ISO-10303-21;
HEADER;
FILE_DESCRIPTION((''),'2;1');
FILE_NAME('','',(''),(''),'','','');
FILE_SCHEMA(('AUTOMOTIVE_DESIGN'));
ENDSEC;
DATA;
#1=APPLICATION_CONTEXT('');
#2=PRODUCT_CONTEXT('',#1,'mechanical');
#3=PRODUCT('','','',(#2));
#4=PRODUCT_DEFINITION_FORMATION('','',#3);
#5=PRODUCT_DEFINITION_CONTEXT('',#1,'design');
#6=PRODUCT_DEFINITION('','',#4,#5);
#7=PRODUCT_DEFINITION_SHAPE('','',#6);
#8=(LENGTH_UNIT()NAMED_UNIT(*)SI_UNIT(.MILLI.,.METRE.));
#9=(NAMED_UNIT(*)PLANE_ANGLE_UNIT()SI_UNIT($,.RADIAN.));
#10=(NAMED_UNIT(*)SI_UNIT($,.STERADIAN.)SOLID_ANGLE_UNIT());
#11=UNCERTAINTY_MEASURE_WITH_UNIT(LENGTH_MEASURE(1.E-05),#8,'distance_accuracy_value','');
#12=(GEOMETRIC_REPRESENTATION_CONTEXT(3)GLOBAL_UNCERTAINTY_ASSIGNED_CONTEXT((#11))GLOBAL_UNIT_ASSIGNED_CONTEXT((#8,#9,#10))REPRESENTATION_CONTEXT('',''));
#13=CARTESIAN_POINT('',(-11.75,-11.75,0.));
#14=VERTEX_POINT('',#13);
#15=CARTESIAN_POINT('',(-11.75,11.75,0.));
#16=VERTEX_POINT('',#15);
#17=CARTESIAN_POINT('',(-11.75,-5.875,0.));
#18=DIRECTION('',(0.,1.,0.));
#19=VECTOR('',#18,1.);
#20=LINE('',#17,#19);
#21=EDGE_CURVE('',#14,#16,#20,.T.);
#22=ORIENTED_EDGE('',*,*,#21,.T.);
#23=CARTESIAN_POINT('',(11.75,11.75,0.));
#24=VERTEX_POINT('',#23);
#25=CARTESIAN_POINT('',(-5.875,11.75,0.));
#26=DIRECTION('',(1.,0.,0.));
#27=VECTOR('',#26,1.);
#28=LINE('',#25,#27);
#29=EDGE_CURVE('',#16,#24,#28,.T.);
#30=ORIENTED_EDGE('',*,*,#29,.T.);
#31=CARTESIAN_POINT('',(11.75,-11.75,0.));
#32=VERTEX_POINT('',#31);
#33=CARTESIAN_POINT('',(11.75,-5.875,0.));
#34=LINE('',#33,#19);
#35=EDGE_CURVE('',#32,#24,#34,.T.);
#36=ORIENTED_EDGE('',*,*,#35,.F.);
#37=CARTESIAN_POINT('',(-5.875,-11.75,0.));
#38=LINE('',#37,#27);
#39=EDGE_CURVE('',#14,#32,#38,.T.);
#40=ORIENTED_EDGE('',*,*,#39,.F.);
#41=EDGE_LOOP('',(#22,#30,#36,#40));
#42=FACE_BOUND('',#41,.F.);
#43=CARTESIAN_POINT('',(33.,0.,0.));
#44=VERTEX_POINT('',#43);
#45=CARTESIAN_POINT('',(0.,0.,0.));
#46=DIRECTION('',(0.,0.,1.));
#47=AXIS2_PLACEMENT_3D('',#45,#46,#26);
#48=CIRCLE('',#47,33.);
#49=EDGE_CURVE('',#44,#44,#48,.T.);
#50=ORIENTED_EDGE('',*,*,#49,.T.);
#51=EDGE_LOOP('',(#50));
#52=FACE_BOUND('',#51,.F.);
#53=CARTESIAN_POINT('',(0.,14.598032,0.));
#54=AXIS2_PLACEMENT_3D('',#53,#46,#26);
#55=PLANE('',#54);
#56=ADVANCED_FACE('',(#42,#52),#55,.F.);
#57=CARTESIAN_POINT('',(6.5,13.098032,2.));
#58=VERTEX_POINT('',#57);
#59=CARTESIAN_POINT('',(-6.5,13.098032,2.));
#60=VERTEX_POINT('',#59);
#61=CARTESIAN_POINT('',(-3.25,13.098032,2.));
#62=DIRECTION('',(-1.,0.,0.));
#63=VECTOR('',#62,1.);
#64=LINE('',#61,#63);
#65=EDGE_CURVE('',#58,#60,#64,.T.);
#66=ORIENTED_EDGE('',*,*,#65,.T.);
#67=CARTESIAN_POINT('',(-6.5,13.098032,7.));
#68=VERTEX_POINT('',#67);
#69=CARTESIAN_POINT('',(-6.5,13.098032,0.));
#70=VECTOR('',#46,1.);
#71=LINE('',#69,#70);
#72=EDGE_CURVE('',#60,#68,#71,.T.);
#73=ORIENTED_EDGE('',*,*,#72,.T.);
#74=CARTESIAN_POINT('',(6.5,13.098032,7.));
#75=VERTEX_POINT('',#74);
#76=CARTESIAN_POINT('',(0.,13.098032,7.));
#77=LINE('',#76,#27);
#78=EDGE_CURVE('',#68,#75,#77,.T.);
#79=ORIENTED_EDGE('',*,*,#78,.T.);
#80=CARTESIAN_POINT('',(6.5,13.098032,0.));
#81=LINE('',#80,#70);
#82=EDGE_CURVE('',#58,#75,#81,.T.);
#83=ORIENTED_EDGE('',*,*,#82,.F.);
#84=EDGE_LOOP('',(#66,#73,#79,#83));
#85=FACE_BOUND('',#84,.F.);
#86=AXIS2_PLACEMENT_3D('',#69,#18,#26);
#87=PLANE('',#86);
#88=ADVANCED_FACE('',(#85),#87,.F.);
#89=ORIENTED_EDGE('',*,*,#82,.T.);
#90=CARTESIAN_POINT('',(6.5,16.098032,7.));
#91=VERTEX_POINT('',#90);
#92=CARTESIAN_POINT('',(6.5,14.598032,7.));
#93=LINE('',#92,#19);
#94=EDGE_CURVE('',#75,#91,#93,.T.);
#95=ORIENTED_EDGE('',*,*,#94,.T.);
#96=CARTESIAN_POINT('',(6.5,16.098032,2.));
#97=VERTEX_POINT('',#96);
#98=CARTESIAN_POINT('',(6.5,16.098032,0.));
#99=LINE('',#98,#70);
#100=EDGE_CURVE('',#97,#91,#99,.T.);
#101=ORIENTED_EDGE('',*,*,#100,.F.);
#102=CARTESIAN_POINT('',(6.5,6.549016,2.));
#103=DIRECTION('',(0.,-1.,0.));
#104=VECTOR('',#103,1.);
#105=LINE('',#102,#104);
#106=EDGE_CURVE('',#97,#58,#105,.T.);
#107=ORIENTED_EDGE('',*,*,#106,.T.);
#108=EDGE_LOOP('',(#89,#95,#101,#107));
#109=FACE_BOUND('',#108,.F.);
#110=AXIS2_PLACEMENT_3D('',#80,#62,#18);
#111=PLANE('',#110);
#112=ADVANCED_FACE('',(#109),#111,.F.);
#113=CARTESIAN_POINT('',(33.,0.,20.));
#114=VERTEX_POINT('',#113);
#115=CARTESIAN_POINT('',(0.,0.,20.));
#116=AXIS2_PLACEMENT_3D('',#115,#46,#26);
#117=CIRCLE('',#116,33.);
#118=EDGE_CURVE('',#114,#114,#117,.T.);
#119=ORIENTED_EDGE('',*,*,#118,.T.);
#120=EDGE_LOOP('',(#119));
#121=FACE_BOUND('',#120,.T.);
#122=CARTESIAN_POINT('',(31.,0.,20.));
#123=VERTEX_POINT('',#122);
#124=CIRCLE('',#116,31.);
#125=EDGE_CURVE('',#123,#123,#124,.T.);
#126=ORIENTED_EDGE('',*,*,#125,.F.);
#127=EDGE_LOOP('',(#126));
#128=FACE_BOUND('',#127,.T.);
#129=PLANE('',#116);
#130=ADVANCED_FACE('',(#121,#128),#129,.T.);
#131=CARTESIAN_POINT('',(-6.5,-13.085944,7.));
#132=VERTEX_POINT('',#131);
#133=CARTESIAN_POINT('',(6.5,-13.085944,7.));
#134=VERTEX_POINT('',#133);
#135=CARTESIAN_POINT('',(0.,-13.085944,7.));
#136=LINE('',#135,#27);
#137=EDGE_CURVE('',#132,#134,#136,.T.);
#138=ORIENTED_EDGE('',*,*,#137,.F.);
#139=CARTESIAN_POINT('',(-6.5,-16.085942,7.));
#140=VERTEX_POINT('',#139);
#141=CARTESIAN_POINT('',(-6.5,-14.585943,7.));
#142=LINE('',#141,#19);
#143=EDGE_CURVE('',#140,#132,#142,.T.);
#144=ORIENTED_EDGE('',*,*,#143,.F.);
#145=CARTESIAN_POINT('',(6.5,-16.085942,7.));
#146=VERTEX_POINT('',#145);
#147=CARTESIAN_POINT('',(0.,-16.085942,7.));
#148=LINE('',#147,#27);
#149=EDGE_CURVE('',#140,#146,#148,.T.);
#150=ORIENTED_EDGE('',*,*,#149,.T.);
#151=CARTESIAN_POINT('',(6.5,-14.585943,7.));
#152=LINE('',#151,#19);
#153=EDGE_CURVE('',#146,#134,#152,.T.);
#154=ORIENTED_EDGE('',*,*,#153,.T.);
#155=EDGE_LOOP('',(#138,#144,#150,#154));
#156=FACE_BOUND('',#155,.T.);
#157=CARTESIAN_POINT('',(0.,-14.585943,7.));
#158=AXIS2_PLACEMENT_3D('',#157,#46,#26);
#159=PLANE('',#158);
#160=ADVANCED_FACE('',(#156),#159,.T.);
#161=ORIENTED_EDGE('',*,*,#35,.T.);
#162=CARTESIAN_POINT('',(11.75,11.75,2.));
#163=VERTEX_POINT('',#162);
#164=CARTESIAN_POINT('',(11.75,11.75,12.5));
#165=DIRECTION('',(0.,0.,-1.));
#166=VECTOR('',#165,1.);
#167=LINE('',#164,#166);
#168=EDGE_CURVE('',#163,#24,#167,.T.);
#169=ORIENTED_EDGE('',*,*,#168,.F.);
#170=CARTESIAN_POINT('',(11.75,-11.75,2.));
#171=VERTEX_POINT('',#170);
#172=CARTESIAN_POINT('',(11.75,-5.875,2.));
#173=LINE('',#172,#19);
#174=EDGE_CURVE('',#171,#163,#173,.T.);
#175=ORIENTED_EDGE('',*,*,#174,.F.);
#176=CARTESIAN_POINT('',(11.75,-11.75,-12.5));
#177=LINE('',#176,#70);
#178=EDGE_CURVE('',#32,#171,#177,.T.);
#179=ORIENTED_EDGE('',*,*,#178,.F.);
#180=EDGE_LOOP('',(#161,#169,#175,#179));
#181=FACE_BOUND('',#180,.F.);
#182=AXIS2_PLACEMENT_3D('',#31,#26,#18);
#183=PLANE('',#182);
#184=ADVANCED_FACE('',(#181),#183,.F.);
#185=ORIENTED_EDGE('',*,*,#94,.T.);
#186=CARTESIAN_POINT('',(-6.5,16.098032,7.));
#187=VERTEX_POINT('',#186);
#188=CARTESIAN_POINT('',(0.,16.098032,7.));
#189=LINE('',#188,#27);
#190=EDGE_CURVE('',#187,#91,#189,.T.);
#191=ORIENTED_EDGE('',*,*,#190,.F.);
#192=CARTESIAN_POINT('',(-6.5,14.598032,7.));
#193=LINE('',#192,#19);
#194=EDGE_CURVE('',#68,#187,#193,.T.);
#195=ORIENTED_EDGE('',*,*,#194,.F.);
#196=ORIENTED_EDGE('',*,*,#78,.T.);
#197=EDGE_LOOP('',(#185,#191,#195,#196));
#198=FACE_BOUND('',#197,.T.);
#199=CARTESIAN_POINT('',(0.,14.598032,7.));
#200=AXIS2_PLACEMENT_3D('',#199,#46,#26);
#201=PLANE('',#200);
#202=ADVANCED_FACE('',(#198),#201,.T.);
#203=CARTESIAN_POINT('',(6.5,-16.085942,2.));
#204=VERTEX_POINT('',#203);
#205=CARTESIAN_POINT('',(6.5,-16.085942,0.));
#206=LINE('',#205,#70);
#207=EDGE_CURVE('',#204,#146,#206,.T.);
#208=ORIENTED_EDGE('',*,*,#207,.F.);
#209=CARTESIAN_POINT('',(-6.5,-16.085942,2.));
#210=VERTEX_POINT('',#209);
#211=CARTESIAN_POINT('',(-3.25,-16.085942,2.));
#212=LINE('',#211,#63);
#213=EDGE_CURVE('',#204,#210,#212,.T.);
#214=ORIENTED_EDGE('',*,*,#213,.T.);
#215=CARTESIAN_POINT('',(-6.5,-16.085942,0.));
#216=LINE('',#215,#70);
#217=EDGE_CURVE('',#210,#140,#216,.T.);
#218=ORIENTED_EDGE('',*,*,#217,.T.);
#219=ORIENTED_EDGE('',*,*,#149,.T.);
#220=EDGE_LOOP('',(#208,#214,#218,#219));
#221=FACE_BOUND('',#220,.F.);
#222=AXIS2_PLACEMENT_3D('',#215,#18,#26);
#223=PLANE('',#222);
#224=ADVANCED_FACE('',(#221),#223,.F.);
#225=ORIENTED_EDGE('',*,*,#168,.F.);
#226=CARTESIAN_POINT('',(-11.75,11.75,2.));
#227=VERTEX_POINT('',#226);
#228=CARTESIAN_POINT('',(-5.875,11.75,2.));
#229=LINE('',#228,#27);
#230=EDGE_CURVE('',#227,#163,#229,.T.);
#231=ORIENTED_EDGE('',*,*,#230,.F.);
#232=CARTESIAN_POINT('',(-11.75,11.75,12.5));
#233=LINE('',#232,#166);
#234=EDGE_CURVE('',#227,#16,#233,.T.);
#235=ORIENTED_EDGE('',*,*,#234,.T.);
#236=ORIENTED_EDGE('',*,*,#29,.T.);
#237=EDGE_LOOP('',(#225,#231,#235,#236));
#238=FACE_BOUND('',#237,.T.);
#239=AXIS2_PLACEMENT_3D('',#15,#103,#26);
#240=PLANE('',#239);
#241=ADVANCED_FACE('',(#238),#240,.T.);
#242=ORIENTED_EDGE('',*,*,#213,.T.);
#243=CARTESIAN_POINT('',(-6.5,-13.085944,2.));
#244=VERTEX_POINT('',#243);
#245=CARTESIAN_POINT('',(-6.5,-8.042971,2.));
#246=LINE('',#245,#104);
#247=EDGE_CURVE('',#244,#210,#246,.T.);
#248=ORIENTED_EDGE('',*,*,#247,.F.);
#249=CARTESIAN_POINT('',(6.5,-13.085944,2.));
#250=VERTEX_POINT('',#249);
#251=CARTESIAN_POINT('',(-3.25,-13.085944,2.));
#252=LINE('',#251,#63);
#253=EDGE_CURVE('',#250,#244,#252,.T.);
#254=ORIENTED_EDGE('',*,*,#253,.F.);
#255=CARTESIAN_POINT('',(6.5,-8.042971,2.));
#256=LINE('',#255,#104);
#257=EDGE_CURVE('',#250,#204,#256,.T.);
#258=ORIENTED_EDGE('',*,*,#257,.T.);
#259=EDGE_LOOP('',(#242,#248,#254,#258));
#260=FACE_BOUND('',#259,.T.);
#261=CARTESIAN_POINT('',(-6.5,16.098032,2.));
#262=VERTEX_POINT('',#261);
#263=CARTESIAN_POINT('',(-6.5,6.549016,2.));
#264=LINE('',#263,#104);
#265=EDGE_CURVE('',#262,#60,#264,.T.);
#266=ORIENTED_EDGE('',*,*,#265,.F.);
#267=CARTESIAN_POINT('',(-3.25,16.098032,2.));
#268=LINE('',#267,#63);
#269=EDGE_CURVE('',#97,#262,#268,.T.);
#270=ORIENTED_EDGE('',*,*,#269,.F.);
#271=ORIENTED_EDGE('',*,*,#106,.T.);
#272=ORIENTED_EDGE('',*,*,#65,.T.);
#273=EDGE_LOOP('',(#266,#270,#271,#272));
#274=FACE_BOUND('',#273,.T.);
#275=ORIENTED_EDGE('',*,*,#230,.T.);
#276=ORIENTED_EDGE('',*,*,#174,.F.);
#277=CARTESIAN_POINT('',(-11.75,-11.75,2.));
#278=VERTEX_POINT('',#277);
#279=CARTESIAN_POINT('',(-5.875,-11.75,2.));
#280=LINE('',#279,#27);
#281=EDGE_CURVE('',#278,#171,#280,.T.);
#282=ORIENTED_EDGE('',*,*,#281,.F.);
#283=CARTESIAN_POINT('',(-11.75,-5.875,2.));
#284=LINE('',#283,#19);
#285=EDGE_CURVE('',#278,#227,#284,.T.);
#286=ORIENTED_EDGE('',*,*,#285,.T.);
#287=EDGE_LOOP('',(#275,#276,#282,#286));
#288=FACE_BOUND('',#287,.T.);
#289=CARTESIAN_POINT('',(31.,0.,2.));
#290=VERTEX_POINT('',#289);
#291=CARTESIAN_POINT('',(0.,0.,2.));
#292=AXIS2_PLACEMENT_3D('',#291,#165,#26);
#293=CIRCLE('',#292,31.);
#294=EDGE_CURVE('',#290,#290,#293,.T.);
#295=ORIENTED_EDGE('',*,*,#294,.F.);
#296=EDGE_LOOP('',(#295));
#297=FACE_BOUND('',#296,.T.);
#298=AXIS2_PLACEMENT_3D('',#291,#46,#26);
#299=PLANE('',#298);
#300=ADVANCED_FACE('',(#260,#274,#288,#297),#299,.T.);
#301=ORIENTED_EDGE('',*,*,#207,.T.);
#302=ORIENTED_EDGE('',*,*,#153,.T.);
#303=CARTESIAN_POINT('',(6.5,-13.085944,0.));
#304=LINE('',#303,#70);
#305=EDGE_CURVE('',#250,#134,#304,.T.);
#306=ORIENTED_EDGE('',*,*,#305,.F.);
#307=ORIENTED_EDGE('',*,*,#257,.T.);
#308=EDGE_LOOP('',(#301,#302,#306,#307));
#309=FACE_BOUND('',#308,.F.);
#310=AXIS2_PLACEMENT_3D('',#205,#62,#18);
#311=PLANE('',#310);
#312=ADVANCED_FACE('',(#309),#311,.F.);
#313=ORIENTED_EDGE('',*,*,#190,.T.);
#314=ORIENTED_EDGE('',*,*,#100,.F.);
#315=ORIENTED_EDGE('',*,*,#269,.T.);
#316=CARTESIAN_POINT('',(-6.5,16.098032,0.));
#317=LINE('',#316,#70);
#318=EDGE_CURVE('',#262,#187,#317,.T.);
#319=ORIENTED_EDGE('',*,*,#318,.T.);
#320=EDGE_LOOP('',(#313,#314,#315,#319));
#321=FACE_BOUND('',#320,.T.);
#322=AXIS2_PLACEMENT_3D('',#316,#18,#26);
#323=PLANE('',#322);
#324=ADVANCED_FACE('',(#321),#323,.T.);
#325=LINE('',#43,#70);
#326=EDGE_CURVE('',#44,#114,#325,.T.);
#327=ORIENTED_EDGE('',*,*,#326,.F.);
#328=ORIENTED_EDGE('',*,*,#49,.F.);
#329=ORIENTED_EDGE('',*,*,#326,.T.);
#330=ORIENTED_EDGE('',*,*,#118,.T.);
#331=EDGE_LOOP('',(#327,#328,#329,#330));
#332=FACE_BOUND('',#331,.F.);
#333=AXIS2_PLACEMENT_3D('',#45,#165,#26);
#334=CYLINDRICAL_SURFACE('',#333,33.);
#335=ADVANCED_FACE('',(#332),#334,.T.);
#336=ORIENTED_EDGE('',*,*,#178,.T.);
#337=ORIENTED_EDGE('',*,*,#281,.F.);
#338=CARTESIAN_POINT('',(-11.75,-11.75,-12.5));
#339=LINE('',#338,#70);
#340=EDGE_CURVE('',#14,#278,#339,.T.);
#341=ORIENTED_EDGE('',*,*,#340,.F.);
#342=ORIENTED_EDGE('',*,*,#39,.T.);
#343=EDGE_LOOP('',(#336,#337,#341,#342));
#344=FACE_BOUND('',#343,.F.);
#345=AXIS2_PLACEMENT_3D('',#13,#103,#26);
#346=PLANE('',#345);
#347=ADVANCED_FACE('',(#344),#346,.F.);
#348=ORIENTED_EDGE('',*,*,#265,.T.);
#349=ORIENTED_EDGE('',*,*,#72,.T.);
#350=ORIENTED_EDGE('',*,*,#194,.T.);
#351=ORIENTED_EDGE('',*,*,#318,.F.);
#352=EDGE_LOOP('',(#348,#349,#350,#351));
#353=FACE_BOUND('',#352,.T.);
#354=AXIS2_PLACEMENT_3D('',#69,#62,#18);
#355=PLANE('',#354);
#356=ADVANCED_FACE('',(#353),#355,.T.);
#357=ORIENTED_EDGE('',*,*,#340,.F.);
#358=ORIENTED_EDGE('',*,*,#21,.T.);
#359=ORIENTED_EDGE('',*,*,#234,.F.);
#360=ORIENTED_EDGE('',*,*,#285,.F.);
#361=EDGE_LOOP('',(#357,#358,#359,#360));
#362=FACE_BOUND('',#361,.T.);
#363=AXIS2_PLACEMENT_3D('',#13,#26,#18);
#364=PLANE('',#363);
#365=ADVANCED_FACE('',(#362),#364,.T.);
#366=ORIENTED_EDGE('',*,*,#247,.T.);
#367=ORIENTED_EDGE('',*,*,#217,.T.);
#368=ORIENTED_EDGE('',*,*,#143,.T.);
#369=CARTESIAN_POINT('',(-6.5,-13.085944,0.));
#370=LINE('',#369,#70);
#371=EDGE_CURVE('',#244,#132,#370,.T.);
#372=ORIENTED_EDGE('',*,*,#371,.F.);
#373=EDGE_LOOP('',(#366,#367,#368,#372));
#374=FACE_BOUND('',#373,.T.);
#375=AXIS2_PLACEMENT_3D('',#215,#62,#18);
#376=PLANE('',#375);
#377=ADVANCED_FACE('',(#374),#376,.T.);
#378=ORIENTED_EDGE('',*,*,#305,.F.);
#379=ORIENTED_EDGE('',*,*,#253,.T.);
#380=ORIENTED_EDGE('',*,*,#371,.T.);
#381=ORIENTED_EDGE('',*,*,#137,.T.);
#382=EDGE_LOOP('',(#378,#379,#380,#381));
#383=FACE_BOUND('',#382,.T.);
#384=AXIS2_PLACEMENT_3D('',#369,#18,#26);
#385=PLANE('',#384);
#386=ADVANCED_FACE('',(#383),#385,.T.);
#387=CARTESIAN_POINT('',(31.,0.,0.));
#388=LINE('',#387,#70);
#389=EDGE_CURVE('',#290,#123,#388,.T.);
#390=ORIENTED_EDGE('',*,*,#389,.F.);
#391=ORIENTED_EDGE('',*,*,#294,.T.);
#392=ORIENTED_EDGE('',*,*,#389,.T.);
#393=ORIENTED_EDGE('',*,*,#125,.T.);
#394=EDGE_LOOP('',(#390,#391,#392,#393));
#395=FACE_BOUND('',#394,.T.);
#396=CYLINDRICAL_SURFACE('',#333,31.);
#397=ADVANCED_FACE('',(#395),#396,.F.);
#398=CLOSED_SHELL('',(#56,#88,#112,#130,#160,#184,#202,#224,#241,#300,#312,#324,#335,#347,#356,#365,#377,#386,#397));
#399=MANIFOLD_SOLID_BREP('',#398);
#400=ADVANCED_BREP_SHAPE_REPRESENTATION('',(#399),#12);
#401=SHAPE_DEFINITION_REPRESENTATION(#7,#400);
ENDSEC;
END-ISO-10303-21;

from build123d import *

# Parameters (mm, degrees)
F0_R     = 33
F1_DEPTH = 20
F2_T     = -2
F3_DEPTH = 102
F4_W     = 23.5
F4_H     = 23.5
F5_DEPTH = 12.5
F6_W     = 13
F6_H     = 3
F6_H_2   = 2.9999976491
F7_DEPTH = 7


# Not quite as in the source:
# - an extrude ends at something that could not be found from the text; its depth is read off the source's solid


with BuildPart() as f1:
    # F0 (on Top) → F1 (new body)
    with BuildSketch(Plane.XY):
        Circle(F0_R)
    extrude(amount=F1_DEPTH)

    # F2
    f2_openings = [f1.faces().sort_by_distance(p)[0] for p in [
        (0, 0, 20),
    ]]
    offset(amount=F2_T, openings=f2_openings)

    # F0 (on Top) → F3 (cut, through all)
    with BuildSketch(Plane.XY):
        Circle(F0_R)
    extrude(amount=-F3_DEPTH, mode=Mode.SUBTRACT)

    # F4 (on face) → F5 (cut, symmetric)
    with BuildSketch(Plane.XY):
        Rectangle(F4_W, F4_H)
    extrude(amount=F5_DEPTH, both=True, mode=Mode.SUBTRACT)

    # F6 (on Top) → F7 (join)
    with BuildSketch(Plane.XY):
        with Locations((0, 14.5980315283)):
            Rectangle(F6_W, F6_H)
        with Locations((0, -14.5859429613)):
            Rectangle(F6_W, F6_H_2)
    extrude(amount=F7_DEPTH)


solid = f1.part
